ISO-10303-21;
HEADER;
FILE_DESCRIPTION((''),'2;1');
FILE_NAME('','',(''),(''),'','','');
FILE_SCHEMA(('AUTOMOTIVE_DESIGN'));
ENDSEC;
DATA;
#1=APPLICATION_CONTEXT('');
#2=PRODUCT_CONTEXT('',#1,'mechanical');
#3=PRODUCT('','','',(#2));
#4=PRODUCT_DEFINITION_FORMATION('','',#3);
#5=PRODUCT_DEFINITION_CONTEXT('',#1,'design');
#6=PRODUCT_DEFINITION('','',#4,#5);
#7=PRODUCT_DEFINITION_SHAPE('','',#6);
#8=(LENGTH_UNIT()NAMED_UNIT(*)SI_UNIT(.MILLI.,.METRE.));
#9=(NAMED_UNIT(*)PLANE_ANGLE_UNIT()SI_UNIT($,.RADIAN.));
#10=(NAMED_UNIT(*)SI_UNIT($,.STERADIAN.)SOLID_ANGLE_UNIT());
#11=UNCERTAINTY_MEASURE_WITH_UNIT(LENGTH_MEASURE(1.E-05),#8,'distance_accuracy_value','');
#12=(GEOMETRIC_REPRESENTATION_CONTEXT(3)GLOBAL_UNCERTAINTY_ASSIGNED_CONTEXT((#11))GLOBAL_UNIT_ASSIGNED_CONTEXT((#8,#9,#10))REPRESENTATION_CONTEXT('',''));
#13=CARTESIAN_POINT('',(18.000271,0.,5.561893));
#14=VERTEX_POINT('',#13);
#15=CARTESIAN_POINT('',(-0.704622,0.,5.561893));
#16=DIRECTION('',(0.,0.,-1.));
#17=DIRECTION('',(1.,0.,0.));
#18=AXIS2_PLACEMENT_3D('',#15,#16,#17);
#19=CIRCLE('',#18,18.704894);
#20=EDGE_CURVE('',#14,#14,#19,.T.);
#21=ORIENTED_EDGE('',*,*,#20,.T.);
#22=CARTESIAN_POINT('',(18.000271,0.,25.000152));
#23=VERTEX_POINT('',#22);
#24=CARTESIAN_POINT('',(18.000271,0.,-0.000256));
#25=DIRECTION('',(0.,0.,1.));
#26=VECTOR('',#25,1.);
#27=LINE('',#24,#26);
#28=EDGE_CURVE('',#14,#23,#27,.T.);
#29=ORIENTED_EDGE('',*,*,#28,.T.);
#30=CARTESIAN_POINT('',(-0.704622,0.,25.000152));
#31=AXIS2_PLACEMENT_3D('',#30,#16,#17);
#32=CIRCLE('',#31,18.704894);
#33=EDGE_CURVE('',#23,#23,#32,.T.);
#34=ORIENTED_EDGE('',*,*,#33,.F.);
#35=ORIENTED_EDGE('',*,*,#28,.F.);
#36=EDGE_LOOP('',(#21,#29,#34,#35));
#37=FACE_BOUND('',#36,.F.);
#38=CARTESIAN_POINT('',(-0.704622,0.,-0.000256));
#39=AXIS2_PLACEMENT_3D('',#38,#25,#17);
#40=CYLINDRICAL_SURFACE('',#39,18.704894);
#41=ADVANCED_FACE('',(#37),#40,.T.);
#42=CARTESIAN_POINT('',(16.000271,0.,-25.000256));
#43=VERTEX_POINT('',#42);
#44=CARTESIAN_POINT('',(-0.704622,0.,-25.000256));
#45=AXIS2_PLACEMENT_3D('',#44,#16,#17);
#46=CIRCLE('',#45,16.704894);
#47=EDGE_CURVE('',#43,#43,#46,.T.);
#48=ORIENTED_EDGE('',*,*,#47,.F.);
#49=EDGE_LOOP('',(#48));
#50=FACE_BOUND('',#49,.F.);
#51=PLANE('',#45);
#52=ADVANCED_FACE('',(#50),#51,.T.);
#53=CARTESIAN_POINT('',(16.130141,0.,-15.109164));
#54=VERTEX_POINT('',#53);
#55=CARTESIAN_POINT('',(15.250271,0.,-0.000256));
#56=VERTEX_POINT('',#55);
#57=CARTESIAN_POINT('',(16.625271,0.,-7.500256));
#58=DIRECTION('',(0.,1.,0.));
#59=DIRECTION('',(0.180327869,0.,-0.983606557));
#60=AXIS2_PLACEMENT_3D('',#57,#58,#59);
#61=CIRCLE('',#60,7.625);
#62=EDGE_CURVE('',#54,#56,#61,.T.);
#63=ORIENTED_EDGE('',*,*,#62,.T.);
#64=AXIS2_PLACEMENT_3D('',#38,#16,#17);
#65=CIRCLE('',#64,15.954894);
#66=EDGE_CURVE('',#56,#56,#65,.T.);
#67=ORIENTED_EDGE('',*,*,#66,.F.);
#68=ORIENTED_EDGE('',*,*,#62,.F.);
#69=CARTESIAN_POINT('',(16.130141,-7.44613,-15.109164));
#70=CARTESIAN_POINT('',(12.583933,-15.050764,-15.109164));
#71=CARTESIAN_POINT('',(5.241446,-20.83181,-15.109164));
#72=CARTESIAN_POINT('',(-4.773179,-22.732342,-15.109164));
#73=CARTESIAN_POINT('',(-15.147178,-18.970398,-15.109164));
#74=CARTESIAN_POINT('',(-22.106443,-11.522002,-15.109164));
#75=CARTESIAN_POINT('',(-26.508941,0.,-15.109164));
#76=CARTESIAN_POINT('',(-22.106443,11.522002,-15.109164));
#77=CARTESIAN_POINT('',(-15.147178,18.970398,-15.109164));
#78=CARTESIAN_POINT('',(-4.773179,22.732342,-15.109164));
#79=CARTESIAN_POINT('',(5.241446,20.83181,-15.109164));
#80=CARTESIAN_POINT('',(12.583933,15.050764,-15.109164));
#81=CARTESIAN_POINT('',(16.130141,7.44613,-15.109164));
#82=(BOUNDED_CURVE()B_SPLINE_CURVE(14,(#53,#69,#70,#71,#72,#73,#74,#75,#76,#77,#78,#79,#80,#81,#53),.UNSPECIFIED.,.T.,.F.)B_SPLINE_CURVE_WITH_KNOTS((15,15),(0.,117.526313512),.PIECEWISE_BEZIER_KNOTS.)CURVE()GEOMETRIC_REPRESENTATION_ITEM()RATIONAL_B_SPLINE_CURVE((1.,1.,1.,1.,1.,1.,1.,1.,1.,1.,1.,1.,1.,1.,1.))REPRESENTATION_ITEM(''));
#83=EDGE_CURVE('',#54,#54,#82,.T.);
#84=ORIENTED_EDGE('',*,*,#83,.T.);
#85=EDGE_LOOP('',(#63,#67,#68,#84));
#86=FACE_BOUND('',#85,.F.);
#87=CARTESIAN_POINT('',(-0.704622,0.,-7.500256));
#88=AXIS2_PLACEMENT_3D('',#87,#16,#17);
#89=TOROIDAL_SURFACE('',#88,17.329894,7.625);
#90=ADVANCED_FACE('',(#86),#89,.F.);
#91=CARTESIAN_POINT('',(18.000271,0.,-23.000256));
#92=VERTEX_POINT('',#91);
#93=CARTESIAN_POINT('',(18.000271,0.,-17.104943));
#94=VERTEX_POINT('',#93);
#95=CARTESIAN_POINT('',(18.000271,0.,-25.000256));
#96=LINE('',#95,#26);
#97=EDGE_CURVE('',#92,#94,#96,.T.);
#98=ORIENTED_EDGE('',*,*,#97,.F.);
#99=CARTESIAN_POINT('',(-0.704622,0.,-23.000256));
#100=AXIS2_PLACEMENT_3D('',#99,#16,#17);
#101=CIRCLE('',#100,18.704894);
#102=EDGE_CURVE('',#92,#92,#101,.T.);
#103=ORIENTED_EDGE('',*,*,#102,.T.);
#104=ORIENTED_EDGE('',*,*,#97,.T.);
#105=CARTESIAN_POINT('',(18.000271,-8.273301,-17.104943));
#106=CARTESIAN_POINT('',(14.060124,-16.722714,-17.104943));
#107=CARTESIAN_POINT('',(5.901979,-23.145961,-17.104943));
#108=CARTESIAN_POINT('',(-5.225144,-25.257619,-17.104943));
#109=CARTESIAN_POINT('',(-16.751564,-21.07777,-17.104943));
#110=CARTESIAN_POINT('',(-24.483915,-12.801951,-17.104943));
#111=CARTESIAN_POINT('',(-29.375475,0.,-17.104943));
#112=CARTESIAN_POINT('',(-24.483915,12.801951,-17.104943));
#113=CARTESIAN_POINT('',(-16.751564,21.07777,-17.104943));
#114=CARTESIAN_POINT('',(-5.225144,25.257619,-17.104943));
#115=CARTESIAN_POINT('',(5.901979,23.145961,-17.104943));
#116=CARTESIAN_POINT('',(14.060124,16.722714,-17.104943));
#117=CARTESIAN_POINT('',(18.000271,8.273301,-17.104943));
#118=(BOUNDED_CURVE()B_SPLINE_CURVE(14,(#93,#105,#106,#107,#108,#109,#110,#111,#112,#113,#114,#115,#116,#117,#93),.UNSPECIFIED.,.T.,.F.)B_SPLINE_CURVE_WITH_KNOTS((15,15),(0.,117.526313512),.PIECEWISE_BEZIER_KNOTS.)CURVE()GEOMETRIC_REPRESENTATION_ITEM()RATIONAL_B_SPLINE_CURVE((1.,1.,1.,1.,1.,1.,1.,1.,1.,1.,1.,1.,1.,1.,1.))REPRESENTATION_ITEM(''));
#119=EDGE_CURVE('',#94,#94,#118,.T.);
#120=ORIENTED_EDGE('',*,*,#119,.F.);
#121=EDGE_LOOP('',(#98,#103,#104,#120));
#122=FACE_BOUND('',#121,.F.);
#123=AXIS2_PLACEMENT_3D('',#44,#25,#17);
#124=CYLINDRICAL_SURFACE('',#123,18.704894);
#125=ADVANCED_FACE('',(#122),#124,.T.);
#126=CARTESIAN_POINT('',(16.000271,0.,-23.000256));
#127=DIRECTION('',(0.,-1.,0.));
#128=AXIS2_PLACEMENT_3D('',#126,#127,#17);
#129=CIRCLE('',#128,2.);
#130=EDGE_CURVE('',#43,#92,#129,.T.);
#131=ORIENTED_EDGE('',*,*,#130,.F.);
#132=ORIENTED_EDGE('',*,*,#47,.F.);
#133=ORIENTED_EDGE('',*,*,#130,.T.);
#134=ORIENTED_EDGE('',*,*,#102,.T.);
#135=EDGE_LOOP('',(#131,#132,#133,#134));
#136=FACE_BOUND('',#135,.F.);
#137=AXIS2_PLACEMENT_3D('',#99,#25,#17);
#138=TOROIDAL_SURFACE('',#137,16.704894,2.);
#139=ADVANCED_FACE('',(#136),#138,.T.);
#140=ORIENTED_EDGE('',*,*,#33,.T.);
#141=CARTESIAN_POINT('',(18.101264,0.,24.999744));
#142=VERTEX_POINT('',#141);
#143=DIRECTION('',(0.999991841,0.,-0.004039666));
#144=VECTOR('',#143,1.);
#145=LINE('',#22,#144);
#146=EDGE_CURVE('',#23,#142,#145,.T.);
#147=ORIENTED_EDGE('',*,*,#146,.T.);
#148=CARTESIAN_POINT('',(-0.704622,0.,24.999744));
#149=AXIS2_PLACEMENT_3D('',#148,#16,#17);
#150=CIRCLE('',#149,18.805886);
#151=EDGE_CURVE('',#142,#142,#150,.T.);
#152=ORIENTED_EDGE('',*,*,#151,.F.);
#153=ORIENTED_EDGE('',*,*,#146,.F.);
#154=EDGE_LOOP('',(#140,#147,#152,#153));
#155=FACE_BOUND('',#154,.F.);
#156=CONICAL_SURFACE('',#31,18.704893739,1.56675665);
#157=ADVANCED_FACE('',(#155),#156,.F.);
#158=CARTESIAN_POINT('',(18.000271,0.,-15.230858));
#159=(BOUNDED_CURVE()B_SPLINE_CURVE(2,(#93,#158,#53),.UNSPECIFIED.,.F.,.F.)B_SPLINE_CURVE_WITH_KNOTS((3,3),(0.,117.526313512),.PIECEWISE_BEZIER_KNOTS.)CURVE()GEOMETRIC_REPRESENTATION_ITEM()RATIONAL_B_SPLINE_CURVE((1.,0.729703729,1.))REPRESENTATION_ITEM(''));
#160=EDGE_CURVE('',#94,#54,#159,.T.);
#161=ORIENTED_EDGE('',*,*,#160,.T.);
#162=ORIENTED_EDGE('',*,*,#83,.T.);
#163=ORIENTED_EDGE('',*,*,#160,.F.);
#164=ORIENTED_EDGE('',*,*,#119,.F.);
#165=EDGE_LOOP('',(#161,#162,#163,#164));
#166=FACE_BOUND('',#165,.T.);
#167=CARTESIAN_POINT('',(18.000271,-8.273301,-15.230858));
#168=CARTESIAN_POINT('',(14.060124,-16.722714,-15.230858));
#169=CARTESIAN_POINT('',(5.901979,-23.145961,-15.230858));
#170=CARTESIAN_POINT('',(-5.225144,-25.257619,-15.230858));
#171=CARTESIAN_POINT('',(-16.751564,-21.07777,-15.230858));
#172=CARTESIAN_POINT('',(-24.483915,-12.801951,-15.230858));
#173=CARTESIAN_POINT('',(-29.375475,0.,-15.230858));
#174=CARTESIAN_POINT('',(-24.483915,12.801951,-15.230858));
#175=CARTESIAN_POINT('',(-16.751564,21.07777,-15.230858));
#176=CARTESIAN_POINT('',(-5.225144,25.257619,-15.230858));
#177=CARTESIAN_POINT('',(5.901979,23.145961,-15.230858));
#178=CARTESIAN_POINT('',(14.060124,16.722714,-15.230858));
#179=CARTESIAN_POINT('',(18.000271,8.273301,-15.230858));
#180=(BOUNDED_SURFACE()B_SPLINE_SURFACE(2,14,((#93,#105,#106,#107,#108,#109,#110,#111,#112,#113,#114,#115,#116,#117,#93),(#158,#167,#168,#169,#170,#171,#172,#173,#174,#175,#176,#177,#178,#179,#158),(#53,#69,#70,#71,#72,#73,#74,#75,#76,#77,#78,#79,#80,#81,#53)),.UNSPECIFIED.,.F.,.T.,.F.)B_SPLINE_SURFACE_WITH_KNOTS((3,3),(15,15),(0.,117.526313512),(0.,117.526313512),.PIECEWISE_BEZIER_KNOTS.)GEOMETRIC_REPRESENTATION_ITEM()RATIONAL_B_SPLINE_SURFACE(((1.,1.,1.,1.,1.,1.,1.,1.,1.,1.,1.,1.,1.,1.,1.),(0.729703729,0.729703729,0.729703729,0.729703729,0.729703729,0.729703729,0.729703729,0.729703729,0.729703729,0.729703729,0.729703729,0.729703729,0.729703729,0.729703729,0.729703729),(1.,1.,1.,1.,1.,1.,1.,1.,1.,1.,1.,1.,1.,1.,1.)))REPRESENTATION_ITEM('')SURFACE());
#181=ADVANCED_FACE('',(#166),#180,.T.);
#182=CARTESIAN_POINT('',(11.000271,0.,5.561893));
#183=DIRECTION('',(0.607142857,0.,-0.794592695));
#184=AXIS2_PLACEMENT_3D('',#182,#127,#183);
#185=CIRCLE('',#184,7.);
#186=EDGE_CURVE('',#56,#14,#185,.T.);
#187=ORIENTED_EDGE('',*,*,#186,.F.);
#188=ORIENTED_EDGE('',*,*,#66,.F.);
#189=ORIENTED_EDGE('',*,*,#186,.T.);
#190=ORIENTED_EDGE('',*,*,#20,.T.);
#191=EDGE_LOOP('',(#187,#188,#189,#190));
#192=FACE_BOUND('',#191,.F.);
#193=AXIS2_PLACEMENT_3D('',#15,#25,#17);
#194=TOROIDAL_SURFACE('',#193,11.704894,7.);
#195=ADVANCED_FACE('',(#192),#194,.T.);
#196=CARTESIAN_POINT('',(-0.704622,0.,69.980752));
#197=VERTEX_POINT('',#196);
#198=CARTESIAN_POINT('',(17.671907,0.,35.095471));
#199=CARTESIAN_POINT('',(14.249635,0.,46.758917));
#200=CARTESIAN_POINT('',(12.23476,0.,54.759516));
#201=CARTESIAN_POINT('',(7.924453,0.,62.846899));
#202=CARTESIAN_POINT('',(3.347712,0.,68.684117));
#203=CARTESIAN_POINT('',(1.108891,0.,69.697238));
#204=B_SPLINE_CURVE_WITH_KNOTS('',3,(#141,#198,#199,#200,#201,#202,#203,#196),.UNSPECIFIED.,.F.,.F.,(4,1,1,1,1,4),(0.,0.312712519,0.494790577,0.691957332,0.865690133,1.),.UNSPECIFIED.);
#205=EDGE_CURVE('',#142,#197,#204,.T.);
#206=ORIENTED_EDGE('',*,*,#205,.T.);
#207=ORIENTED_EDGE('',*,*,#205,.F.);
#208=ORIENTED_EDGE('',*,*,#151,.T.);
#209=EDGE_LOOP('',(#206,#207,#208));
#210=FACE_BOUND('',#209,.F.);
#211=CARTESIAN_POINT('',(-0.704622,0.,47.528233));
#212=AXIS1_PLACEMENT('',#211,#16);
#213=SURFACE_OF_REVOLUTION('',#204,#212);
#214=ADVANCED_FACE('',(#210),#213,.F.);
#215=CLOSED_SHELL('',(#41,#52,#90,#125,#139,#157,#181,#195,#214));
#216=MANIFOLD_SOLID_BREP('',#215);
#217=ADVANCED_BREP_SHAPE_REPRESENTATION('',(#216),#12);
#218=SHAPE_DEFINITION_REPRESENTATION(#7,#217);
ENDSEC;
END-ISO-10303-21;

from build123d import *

# Parameters (mm, degrees)
F2_R = 2


# Not quite as in the source:
# - a fillet or chamfer that OpenCascade refuses, or shapes differently, is made with other operations: its cross-section is extruded or revolved along the edge and cut away or added


with BuildPart() as f1:
    # F0 (on Front) → F1 (revolve)
    with BuildSketch(Plane.XZ):
        with BuildLine():
            Line((18.000271342, 25.0001516185), (18.1012638153, 24.9997436393))
            add(Edge.make_bspline(
                [(18.1012638153, 24.9997436393), (17.6719067295, 35.095470957), (14.2496345804, 46.7589173288), (12.2347602329, 54.7595156146), (7.9244531632, 62.8468989209), (3.3477119391, 68.6841172693), (1.1088911486, 69.6972383356), (-0.7046223968, 69.9807515456)],
                knots=[0, 0, 0, 0, 0.3127125194, 0.4947905771, 0.691957332, 0.8656901327, 1, 1, 1, 1], degree=3))
            Line((-0.7046223968, 69.9807515456), (-0.7046223968, 25.0757137578))
            Line((-0.7046223968, 25.0757137578), (18.000271342, 25.0757137578))
            Line((18.000271342, 25.0757137578), (18.000271342, 25.0001516185))
        make_face()
        with BuildLine():
            Line((18.000271342, -0.0002563607), (18.000271342, 25.0001516185))
            Line((18.000271342, 25.0001516185), (-0.7046223968, 25.0757137578))
            Line((-0.7046223968, 25.0757137578), (-0.7046223968, 0))
            Line((-0.7046223968, 0), (-0.7046223968, -0.0002563607))
            Line((-0.7046223968, -0.0002563607), (15.250271342, -0.0002563607))
            ThreePointArc((15.250271342, -0.0002563607), (16.625271342, 0.1247436393), (18.000271342, -0.0002563607))
        make_face()
        Polygon((-0.7046223968, 25.0757137578), (18.000271342, 25.0001516185), (18.000271342, 25.0757137578), align=None)
        with BuildLine():
            Line((15.250271342, -0.0002563607), (18.000271342, -0.0002563607))
            ThreePointArc((18.000271342, -0.0002563607), (16.625271342, 0.1247436393), (15.250271342, -0.0002563607))
        make_face()
        with BuildLine():
            ThreePointArc((18.000271342, -15.0002563607), (9.125271342, -8.8752563607), (15.250271342, -0.0002563607))
            Line((15.250271342, -0.0002563607), (-0.7046223968, -0.0002563607))
            Line((-0.7046223968, -0.0002563607), (-0.7046223968, -25.0002563607))
            Line((-0.7046223968, -25.0002563607), (18.000271342, -25.0002563607))
            Line((18.000271342, -25.0002563607), (18.000271342, -15.0002563607))
        make_face()
    revolve(axis=Axis((-0.7046223968, 0, 47.5282326517), (0, 0, -1)))

    # F2
    f2_edges = [f1.edges().sort_by_distance(p)[0] for p in [
        (-19.409516, 0, -15.000256),
        (-19.409516, 0, -25.000256),
    ]]
    fillet(f2_edges, radius=F2_R)

    # F3: fillet of radius 7 on 1 edges, made by hand

    # F3_s1 → F3_t2 (revolve, cut)
    with BuildSketch(Plane.XZ):
        with BuildLine():
            ThreePointArc((15.250271342, -0.0002563607), (17.275221541, 2.4594740932), (18.000271342, 5.5618925047))
            Line((18.000271342, 5.5618925047), (18.000271342, -0.0002563607))
            Line((18.000271342, -0.0002563607), (15.250271342, -0.0002563607))
        make_face()
    revolve(axis=Axis((-0.7046223968, 0, -0.0002563607), (0, 0, -1)), mode=Mode.SUBTRACT)


solid = f1.part
